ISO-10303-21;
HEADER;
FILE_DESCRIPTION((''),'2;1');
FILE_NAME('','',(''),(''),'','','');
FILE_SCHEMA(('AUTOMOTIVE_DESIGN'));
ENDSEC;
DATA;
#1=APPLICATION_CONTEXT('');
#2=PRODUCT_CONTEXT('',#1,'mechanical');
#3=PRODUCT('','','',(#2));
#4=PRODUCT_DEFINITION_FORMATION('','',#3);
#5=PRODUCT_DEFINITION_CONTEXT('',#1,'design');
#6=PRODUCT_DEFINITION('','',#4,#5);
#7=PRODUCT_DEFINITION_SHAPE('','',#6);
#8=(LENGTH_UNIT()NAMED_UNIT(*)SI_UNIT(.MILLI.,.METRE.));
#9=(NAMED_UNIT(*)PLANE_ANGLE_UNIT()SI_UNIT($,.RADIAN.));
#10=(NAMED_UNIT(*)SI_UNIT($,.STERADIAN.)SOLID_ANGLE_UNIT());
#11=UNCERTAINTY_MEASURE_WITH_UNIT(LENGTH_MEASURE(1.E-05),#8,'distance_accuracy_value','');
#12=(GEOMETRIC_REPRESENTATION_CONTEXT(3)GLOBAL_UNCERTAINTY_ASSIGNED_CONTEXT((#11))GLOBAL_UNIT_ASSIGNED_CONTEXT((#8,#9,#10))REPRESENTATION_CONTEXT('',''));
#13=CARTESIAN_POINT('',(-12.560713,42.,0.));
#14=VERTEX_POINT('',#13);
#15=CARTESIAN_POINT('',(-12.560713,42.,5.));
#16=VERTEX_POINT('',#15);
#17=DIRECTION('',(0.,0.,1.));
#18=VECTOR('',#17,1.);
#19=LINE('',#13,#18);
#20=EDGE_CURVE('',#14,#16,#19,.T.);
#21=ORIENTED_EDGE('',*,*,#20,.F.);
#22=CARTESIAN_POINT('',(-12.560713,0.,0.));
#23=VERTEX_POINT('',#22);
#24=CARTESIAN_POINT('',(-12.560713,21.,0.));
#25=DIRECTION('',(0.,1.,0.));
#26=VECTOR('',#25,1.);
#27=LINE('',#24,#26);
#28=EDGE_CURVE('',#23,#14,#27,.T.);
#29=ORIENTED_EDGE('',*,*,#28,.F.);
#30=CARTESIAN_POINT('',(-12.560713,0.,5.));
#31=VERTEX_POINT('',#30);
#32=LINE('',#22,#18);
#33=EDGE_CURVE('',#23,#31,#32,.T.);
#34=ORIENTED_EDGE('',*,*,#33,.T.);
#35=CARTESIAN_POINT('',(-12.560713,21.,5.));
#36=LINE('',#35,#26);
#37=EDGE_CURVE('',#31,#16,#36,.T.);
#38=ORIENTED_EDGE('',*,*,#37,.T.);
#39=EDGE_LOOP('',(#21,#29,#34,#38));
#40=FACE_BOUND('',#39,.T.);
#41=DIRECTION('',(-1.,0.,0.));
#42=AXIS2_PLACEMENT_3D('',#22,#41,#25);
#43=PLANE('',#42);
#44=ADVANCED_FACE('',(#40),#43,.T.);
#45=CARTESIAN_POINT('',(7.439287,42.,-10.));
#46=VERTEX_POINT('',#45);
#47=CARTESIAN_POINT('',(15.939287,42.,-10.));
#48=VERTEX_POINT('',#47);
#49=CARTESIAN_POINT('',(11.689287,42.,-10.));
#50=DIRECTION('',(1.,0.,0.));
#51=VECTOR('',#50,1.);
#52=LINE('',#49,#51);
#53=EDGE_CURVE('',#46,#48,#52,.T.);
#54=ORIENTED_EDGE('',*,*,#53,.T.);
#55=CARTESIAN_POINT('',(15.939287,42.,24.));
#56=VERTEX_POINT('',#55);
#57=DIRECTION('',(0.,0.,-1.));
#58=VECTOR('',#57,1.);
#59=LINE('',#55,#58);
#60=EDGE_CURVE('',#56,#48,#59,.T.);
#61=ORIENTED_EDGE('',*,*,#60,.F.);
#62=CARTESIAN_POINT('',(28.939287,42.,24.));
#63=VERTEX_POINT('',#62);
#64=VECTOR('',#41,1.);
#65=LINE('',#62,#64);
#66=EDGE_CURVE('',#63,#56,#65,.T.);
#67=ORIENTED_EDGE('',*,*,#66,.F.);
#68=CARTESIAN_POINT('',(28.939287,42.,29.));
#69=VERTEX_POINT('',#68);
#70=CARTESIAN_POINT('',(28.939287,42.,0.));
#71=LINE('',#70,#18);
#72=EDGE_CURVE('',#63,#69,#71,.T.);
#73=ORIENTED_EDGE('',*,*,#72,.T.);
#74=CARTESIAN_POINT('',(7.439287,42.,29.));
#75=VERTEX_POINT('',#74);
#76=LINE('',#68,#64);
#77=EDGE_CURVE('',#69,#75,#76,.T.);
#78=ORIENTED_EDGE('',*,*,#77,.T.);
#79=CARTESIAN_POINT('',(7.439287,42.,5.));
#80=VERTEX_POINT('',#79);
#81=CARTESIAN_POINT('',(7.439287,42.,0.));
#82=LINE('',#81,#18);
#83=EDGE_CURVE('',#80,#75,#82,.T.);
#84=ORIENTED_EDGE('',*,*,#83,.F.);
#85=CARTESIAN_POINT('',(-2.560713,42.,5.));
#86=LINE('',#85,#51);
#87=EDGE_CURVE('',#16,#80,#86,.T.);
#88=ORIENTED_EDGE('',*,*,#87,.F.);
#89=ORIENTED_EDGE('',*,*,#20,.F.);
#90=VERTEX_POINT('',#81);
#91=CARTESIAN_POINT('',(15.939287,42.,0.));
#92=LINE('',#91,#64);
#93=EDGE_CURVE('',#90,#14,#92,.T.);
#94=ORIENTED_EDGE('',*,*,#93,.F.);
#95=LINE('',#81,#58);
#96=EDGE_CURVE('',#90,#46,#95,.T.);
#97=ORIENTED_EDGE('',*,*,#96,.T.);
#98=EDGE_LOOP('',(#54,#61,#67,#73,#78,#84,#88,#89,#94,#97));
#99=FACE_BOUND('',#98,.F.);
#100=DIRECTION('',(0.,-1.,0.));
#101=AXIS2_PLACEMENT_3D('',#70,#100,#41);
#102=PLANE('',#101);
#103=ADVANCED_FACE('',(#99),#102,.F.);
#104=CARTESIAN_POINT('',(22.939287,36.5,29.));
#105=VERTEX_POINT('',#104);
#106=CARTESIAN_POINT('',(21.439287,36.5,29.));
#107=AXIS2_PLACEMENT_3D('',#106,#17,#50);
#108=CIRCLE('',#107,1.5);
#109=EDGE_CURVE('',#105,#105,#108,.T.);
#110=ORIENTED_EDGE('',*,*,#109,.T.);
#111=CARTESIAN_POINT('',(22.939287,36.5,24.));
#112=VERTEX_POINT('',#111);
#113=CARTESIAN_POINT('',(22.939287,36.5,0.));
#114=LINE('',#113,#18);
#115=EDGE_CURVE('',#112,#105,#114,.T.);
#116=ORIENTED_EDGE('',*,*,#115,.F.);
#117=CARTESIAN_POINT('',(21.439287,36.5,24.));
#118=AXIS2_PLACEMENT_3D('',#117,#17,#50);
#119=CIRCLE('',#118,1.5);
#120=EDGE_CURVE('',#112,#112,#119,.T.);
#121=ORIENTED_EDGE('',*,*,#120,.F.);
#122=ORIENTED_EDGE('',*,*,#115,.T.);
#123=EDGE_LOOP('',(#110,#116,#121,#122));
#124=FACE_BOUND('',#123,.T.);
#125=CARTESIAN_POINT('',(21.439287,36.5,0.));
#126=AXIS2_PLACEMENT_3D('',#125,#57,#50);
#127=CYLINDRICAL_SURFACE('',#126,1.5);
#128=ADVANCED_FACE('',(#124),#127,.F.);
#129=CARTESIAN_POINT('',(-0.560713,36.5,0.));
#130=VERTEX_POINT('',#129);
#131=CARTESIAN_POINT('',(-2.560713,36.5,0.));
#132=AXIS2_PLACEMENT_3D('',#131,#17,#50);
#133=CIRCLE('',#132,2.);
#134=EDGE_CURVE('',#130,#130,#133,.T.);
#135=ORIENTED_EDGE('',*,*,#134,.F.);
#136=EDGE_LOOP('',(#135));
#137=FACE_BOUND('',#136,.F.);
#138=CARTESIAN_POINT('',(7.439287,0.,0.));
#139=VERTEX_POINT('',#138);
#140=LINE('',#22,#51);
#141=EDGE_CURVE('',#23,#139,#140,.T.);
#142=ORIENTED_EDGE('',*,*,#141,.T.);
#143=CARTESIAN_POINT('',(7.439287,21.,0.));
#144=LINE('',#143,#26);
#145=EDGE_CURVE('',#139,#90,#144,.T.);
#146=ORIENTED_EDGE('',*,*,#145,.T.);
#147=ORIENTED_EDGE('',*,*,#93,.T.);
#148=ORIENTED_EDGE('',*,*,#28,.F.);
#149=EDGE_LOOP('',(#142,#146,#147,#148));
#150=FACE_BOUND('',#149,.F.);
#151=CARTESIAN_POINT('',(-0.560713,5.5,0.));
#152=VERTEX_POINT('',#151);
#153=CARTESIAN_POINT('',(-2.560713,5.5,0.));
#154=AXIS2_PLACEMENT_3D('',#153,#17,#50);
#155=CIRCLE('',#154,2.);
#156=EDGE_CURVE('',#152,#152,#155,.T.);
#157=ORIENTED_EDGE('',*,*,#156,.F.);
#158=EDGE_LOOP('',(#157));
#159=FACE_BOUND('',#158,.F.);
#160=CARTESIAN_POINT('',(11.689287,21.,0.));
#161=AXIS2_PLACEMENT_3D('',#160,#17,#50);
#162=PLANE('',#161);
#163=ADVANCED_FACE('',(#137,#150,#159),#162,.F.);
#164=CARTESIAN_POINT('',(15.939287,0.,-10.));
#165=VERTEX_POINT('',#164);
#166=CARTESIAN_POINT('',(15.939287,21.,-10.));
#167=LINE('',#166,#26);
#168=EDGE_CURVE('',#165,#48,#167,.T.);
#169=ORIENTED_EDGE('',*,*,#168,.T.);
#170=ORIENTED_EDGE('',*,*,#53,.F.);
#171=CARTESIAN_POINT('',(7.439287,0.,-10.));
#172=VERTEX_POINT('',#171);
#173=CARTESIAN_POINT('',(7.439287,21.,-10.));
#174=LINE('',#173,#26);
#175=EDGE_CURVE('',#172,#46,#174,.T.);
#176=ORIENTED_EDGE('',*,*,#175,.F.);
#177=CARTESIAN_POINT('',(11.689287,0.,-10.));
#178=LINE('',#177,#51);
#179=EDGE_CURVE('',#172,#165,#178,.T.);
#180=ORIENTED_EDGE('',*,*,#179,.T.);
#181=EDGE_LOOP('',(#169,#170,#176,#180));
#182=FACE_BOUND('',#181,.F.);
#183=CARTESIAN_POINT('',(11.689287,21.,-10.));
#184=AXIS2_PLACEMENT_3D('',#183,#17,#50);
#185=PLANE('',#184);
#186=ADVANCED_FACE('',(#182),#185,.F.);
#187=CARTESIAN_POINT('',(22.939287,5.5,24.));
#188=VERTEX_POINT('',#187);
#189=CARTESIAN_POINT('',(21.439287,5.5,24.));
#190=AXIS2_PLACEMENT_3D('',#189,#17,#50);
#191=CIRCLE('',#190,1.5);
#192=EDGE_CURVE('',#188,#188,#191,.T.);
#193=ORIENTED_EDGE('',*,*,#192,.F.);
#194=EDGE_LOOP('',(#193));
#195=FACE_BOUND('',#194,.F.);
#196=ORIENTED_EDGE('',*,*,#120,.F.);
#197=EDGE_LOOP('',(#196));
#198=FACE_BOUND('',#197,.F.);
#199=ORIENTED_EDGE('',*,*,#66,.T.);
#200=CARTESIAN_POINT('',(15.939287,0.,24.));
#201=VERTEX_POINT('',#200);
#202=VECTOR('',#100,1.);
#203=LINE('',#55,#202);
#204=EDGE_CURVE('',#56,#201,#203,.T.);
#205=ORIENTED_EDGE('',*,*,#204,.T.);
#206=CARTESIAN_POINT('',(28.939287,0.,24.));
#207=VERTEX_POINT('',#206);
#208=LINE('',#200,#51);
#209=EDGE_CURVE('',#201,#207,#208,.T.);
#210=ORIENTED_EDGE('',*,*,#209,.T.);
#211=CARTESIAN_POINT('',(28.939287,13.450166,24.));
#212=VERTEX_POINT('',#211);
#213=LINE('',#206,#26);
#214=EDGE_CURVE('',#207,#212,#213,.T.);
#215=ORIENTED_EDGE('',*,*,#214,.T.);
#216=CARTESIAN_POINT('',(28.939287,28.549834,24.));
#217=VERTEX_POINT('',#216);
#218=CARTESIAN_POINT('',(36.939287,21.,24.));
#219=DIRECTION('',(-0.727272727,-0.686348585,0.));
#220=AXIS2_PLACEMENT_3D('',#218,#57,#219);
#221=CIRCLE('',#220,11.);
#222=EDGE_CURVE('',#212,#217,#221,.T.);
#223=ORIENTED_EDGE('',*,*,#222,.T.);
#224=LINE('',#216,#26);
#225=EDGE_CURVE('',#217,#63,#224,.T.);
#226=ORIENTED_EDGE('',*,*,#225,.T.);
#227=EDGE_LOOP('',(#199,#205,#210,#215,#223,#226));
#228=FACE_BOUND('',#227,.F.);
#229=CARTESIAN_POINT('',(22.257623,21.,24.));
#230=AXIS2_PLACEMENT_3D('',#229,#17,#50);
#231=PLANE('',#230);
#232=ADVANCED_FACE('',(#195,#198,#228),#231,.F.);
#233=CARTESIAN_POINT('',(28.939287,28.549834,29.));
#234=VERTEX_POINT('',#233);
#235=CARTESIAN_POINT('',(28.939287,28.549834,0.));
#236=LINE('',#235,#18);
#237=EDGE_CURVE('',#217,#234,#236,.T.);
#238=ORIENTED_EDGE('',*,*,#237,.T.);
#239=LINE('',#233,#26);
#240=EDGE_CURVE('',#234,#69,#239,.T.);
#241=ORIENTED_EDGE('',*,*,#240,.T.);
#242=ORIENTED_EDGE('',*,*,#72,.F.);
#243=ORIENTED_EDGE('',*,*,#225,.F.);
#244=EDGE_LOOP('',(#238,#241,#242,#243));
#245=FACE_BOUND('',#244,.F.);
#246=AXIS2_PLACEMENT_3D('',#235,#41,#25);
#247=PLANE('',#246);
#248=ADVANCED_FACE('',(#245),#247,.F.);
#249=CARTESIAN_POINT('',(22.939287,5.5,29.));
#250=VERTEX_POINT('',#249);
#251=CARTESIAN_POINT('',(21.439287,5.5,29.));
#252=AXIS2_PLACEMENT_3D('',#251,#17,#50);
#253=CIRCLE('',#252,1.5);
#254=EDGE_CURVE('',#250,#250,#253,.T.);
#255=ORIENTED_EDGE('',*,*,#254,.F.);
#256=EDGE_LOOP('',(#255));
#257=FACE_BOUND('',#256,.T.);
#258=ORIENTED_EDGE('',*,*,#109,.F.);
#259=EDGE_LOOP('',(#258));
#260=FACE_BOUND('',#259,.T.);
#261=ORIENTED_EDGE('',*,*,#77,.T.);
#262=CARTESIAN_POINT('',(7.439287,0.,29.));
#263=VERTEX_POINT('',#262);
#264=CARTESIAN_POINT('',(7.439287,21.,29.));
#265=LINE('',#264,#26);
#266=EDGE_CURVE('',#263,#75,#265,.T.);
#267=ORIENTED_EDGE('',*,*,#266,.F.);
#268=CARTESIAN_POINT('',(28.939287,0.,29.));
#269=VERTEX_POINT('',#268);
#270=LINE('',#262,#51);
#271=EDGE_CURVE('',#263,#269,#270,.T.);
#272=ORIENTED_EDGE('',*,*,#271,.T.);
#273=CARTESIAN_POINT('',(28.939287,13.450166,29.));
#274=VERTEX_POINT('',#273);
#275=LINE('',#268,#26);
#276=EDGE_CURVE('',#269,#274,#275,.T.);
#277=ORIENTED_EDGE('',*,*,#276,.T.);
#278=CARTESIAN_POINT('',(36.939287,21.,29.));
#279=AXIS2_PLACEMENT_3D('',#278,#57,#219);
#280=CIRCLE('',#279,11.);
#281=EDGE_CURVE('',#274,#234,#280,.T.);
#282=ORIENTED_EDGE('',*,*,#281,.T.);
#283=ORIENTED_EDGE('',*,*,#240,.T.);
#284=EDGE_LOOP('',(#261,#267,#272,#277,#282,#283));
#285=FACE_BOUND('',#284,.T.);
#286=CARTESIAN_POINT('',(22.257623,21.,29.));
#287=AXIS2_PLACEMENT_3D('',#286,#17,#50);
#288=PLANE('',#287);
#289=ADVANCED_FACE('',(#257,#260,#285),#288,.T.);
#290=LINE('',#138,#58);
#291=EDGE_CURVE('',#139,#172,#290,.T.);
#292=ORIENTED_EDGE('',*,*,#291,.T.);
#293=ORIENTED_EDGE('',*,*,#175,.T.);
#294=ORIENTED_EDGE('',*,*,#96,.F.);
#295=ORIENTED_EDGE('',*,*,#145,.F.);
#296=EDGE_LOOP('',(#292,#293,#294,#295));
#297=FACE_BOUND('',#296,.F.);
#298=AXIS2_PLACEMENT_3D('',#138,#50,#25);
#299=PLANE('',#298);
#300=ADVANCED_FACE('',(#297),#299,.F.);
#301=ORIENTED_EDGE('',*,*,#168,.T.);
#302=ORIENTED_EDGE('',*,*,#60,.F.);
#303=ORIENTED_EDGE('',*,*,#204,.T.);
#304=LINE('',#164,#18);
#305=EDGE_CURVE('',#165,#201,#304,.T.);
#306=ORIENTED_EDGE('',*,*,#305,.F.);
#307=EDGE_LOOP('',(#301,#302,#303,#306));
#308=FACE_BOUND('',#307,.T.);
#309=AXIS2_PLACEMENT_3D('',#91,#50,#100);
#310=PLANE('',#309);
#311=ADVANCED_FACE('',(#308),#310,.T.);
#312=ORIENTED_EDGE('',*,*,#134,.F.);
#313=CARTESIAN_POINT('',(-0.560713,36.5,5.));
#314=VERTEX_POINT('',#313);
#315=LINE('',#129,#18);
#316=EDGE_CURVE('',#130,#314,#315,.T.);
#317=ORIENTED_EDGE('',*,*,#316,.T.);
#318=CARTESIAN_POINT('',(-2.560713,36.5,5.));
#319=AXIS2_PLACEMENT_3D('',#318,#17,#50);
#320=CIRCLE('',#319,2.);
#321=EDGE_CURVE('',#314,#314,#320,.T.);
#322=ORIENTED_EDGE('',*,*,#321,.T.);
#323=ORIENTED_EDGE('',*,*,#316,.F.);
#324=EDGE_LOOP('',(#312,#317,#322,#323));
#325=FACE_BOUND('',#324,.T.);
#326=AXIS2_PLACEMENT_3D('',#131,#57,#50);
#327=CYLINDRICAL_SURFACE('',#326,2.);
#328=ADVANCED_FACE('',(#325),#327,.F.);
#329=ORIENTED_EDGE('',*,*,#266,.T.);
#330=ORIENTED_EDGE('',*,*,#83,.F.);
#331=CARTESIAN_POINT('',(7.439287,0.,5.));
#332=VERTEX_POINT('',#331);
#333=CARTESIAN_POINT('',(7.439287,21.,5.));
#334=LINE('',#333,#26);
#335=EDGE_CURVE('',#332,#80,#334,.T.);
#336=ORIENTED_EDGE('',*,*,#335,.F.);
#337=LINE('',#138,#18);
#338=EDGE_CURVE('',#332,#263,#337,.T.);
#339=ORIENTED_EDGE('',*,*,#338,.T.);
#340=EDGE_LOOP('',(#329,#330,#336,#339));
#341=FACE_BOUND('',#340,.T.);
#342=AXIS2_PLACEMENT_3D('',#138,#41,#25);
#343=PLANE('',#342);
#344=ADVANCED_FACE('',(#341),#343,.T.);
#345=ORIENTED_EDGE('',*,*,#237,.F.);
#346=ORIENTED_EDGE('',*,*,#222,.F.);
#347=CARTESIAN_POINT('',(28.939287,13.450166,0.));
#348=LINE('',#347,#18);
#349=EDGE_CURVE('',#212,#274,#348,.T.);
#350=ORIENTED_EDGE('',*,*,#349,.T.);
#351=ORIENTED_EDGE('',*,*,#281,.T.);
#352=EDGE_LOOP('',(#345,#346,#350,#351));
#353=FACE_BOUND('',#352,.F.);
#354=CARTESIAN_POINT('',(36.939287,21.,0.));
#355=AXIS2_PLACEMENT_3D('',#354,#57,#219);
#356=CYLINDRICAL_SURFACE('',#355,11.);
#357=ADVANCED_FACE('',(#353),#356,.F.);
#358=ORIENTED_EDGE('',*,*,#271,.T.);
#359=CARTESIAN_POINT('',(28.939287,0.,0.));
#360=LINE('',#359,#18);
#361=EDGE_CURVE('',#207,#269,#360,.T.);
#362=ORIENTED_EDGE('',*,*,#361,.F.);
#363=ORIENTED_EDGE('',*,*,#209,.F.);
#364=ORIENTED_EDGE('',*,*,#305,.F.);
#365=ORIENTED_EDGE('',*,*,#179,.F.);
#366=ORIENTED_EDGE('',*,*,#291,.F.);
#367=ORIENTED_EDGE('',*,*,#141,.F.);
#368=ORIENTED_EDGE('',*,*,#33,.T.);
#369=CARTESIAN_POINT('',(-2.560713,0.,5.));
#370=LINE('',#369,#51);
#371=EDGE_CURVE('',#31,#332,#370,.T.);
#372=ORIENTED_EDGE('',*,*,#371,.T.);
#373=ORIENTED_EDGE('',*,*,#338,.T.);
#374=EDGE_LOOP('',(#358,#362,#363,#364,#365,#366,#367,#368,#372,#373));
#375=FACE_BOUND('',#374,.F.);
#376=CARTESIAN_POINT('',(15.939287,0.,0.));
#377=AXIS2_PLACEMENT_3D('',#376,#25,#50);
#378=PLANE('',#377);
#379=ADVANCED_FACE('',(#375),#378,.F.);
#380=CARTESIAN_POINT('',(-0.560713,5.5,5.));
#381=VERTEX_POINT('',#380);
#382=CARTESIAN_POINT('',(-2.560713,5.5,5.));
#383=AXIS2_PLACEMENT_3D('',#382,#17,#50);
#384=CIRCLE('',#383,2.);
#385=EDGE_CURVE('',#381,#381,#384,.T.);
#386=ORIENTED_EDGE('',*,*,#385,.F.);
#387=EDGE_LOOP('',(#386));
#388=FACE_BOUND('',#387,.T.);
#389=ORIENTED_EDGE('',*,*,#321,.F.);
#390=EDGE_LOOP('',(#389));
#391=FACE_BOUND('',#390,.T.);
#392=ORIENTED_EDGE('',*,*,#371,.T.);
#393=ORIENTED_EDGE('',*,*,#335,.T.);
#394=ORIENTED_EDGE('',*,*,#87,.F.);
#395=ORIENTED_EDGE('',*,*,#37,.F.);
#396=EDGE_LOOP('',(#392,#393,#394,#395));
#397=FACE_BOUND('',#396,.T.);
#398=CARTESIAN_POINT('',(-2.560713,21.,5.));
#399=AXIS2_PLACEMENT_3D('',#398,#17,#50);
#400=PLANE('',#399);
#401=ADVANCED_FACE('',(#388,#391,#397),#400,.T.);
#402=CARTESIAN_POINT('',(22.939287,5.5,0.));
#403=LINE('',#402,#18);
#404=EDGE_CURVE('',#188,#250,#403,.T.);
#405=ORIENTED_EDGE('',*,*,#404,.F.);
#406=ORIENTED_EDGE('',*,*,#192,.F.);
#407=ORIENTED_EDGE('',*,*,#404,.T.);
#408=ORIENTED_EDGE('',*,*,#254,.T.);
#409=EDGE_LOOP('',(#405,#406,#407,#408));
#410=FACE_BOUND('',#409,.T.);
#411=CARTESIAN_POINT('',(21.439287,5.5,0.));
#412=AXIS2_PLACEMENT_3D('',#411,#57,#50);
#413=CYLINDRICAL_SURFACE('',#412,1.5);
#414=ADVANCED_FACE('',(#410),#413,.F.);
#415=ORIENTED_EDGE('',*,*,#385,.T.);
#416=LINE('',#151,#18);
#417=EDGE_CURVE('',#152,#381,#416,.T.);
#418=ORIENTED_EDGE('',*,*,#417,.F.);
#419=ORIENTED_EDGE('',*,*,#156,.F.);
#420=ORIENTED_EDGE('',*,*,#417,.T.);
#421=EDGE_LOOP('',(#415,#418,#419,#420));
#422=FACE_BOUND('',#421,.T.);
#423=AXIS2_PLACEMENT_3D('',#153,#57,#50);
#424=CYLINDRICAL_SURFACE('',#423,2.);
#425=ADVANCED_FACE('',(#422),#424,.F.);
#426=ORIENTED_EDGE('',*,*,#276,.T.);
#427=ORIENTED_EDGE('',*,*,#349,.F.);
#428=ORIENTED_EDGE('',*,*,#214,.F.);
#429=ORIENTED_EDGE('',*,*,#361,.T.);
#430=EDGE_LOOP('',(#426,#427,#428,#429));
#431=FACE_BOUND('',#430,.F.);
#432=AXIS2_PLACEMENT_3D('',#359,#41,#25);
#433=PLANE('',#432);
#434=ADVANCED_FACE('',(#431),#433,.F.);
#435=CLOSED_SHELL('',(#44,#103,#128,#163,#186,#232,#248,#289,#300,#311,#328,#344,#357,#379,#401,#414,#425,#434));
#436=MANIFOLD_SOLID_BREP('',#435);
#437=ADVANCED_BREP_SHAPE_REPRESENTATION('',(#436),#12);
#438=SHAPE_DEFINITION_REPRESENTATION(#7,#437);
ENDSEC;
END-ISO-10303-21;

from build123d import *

# Parameters (mm, degrees)
F0_W          = 20
F0_H          = 42
F0_R          = 2
F1_DEPTH      = 5
F0_W_2        = 8.5
F2_DEPTH      = 29
F2_DEPTH_BACK = 10
F0_R_2        = 1.5
F3_DEPTH      = 29
F4_DEPTH      = 24


# Not quite as in the source:
# - a feature names something its author has since deleted; it is built from what else it names


with BuildPart() as f1:
    # F0 (on Top) → F1 (new body)
    with BuildSketch(Plane.XY):
        with Locations((-2.5607131049, 21)):
            Rectangle(F0_W, F0_H)
        with Locations((-2.5607131049, 5.5)):
            Circle(F0_R, mode=Mode.SUBTRACT)
        with Locations((-2.5607131049, 36.5)):
            Circle(F0_R, mode=Mode.SUBTRACT)
    extrude(amount=F1_DEPTH)

    # F0 (on Top) → F2 (join, two sides)
    with BuildSketch(Plane.XY) as f2_sk:
        with Locations((11.6892868951, 21)):
            Rectangle(F0_W_2, F0_H)
    extrude(amount=F2_DEPTH)
    extrude(f2_sk.sketch, amount=-F2_DEPTH_BACK)

    # F0 (on Top) → F3 (join)
    with BuildSketch(Plane.XY):
        with BuildLine():
            ThreePointArc((28.9392868951, 13.4501655647), (25.9392868951, 21), (28.9392868951, 28.5498344353))
            Line((28.9392868951, 28.5498344353), (28.9392868951, 42))
            Line((28.9392868951, 42), (15.9392868951, 42))
            Line((15.9392868951, 42), (15.9392868951, 0))
            Line((15.9392868951, 0), (28.9392868951, 0))
            Line((28.9392868951, 0), (28.9392868951, 13.4501655647))
        make_face()
        with Locations((21.4392868951, 5.5)):
            Circle(F0_R_2, mode=Mode.SUBTRACT)
        with Locations((21.4392868951, 36.5)):
            Circle(F0_R_2, mode=Mode.SUBTRACT)
    extrude(amount=F3_DEPTH)

    # F0 (on Top) → F4 (cut)
    with BuildSketch(Plane.XY):
        with BuildLine():
            ThreePointArc((28.9392868951, 13.4501655647), (25.9392868951, 21), (28.9392868951, 28.5498344353))
            Line((28.9392868951, 28.5498344353), (28.9392868951, 42))
            Line((28.9392868951, 42), (15.9392868951, 42))
            Line((15.9392868951, 42), (15.9392868951, 0))
            Line((15.9392868951, 0), (28.9392868951, 0))
            Line((28.9392868951, 0), (28.9392868951, 13.4501655647))
        make_face()
        with Locations((21.4392868951, 5.5)):
            Circle(F0_R_2, mode=Mode.SUBTRACT)
        with Locations((21.4392868951, 36.5)):
            Circle(F0_R_2, mode=Mode.SUBTRACT)
    extrude(amount=F4_DEPTH, mode=Mode.SUBTRACT)


solid = f1.part
